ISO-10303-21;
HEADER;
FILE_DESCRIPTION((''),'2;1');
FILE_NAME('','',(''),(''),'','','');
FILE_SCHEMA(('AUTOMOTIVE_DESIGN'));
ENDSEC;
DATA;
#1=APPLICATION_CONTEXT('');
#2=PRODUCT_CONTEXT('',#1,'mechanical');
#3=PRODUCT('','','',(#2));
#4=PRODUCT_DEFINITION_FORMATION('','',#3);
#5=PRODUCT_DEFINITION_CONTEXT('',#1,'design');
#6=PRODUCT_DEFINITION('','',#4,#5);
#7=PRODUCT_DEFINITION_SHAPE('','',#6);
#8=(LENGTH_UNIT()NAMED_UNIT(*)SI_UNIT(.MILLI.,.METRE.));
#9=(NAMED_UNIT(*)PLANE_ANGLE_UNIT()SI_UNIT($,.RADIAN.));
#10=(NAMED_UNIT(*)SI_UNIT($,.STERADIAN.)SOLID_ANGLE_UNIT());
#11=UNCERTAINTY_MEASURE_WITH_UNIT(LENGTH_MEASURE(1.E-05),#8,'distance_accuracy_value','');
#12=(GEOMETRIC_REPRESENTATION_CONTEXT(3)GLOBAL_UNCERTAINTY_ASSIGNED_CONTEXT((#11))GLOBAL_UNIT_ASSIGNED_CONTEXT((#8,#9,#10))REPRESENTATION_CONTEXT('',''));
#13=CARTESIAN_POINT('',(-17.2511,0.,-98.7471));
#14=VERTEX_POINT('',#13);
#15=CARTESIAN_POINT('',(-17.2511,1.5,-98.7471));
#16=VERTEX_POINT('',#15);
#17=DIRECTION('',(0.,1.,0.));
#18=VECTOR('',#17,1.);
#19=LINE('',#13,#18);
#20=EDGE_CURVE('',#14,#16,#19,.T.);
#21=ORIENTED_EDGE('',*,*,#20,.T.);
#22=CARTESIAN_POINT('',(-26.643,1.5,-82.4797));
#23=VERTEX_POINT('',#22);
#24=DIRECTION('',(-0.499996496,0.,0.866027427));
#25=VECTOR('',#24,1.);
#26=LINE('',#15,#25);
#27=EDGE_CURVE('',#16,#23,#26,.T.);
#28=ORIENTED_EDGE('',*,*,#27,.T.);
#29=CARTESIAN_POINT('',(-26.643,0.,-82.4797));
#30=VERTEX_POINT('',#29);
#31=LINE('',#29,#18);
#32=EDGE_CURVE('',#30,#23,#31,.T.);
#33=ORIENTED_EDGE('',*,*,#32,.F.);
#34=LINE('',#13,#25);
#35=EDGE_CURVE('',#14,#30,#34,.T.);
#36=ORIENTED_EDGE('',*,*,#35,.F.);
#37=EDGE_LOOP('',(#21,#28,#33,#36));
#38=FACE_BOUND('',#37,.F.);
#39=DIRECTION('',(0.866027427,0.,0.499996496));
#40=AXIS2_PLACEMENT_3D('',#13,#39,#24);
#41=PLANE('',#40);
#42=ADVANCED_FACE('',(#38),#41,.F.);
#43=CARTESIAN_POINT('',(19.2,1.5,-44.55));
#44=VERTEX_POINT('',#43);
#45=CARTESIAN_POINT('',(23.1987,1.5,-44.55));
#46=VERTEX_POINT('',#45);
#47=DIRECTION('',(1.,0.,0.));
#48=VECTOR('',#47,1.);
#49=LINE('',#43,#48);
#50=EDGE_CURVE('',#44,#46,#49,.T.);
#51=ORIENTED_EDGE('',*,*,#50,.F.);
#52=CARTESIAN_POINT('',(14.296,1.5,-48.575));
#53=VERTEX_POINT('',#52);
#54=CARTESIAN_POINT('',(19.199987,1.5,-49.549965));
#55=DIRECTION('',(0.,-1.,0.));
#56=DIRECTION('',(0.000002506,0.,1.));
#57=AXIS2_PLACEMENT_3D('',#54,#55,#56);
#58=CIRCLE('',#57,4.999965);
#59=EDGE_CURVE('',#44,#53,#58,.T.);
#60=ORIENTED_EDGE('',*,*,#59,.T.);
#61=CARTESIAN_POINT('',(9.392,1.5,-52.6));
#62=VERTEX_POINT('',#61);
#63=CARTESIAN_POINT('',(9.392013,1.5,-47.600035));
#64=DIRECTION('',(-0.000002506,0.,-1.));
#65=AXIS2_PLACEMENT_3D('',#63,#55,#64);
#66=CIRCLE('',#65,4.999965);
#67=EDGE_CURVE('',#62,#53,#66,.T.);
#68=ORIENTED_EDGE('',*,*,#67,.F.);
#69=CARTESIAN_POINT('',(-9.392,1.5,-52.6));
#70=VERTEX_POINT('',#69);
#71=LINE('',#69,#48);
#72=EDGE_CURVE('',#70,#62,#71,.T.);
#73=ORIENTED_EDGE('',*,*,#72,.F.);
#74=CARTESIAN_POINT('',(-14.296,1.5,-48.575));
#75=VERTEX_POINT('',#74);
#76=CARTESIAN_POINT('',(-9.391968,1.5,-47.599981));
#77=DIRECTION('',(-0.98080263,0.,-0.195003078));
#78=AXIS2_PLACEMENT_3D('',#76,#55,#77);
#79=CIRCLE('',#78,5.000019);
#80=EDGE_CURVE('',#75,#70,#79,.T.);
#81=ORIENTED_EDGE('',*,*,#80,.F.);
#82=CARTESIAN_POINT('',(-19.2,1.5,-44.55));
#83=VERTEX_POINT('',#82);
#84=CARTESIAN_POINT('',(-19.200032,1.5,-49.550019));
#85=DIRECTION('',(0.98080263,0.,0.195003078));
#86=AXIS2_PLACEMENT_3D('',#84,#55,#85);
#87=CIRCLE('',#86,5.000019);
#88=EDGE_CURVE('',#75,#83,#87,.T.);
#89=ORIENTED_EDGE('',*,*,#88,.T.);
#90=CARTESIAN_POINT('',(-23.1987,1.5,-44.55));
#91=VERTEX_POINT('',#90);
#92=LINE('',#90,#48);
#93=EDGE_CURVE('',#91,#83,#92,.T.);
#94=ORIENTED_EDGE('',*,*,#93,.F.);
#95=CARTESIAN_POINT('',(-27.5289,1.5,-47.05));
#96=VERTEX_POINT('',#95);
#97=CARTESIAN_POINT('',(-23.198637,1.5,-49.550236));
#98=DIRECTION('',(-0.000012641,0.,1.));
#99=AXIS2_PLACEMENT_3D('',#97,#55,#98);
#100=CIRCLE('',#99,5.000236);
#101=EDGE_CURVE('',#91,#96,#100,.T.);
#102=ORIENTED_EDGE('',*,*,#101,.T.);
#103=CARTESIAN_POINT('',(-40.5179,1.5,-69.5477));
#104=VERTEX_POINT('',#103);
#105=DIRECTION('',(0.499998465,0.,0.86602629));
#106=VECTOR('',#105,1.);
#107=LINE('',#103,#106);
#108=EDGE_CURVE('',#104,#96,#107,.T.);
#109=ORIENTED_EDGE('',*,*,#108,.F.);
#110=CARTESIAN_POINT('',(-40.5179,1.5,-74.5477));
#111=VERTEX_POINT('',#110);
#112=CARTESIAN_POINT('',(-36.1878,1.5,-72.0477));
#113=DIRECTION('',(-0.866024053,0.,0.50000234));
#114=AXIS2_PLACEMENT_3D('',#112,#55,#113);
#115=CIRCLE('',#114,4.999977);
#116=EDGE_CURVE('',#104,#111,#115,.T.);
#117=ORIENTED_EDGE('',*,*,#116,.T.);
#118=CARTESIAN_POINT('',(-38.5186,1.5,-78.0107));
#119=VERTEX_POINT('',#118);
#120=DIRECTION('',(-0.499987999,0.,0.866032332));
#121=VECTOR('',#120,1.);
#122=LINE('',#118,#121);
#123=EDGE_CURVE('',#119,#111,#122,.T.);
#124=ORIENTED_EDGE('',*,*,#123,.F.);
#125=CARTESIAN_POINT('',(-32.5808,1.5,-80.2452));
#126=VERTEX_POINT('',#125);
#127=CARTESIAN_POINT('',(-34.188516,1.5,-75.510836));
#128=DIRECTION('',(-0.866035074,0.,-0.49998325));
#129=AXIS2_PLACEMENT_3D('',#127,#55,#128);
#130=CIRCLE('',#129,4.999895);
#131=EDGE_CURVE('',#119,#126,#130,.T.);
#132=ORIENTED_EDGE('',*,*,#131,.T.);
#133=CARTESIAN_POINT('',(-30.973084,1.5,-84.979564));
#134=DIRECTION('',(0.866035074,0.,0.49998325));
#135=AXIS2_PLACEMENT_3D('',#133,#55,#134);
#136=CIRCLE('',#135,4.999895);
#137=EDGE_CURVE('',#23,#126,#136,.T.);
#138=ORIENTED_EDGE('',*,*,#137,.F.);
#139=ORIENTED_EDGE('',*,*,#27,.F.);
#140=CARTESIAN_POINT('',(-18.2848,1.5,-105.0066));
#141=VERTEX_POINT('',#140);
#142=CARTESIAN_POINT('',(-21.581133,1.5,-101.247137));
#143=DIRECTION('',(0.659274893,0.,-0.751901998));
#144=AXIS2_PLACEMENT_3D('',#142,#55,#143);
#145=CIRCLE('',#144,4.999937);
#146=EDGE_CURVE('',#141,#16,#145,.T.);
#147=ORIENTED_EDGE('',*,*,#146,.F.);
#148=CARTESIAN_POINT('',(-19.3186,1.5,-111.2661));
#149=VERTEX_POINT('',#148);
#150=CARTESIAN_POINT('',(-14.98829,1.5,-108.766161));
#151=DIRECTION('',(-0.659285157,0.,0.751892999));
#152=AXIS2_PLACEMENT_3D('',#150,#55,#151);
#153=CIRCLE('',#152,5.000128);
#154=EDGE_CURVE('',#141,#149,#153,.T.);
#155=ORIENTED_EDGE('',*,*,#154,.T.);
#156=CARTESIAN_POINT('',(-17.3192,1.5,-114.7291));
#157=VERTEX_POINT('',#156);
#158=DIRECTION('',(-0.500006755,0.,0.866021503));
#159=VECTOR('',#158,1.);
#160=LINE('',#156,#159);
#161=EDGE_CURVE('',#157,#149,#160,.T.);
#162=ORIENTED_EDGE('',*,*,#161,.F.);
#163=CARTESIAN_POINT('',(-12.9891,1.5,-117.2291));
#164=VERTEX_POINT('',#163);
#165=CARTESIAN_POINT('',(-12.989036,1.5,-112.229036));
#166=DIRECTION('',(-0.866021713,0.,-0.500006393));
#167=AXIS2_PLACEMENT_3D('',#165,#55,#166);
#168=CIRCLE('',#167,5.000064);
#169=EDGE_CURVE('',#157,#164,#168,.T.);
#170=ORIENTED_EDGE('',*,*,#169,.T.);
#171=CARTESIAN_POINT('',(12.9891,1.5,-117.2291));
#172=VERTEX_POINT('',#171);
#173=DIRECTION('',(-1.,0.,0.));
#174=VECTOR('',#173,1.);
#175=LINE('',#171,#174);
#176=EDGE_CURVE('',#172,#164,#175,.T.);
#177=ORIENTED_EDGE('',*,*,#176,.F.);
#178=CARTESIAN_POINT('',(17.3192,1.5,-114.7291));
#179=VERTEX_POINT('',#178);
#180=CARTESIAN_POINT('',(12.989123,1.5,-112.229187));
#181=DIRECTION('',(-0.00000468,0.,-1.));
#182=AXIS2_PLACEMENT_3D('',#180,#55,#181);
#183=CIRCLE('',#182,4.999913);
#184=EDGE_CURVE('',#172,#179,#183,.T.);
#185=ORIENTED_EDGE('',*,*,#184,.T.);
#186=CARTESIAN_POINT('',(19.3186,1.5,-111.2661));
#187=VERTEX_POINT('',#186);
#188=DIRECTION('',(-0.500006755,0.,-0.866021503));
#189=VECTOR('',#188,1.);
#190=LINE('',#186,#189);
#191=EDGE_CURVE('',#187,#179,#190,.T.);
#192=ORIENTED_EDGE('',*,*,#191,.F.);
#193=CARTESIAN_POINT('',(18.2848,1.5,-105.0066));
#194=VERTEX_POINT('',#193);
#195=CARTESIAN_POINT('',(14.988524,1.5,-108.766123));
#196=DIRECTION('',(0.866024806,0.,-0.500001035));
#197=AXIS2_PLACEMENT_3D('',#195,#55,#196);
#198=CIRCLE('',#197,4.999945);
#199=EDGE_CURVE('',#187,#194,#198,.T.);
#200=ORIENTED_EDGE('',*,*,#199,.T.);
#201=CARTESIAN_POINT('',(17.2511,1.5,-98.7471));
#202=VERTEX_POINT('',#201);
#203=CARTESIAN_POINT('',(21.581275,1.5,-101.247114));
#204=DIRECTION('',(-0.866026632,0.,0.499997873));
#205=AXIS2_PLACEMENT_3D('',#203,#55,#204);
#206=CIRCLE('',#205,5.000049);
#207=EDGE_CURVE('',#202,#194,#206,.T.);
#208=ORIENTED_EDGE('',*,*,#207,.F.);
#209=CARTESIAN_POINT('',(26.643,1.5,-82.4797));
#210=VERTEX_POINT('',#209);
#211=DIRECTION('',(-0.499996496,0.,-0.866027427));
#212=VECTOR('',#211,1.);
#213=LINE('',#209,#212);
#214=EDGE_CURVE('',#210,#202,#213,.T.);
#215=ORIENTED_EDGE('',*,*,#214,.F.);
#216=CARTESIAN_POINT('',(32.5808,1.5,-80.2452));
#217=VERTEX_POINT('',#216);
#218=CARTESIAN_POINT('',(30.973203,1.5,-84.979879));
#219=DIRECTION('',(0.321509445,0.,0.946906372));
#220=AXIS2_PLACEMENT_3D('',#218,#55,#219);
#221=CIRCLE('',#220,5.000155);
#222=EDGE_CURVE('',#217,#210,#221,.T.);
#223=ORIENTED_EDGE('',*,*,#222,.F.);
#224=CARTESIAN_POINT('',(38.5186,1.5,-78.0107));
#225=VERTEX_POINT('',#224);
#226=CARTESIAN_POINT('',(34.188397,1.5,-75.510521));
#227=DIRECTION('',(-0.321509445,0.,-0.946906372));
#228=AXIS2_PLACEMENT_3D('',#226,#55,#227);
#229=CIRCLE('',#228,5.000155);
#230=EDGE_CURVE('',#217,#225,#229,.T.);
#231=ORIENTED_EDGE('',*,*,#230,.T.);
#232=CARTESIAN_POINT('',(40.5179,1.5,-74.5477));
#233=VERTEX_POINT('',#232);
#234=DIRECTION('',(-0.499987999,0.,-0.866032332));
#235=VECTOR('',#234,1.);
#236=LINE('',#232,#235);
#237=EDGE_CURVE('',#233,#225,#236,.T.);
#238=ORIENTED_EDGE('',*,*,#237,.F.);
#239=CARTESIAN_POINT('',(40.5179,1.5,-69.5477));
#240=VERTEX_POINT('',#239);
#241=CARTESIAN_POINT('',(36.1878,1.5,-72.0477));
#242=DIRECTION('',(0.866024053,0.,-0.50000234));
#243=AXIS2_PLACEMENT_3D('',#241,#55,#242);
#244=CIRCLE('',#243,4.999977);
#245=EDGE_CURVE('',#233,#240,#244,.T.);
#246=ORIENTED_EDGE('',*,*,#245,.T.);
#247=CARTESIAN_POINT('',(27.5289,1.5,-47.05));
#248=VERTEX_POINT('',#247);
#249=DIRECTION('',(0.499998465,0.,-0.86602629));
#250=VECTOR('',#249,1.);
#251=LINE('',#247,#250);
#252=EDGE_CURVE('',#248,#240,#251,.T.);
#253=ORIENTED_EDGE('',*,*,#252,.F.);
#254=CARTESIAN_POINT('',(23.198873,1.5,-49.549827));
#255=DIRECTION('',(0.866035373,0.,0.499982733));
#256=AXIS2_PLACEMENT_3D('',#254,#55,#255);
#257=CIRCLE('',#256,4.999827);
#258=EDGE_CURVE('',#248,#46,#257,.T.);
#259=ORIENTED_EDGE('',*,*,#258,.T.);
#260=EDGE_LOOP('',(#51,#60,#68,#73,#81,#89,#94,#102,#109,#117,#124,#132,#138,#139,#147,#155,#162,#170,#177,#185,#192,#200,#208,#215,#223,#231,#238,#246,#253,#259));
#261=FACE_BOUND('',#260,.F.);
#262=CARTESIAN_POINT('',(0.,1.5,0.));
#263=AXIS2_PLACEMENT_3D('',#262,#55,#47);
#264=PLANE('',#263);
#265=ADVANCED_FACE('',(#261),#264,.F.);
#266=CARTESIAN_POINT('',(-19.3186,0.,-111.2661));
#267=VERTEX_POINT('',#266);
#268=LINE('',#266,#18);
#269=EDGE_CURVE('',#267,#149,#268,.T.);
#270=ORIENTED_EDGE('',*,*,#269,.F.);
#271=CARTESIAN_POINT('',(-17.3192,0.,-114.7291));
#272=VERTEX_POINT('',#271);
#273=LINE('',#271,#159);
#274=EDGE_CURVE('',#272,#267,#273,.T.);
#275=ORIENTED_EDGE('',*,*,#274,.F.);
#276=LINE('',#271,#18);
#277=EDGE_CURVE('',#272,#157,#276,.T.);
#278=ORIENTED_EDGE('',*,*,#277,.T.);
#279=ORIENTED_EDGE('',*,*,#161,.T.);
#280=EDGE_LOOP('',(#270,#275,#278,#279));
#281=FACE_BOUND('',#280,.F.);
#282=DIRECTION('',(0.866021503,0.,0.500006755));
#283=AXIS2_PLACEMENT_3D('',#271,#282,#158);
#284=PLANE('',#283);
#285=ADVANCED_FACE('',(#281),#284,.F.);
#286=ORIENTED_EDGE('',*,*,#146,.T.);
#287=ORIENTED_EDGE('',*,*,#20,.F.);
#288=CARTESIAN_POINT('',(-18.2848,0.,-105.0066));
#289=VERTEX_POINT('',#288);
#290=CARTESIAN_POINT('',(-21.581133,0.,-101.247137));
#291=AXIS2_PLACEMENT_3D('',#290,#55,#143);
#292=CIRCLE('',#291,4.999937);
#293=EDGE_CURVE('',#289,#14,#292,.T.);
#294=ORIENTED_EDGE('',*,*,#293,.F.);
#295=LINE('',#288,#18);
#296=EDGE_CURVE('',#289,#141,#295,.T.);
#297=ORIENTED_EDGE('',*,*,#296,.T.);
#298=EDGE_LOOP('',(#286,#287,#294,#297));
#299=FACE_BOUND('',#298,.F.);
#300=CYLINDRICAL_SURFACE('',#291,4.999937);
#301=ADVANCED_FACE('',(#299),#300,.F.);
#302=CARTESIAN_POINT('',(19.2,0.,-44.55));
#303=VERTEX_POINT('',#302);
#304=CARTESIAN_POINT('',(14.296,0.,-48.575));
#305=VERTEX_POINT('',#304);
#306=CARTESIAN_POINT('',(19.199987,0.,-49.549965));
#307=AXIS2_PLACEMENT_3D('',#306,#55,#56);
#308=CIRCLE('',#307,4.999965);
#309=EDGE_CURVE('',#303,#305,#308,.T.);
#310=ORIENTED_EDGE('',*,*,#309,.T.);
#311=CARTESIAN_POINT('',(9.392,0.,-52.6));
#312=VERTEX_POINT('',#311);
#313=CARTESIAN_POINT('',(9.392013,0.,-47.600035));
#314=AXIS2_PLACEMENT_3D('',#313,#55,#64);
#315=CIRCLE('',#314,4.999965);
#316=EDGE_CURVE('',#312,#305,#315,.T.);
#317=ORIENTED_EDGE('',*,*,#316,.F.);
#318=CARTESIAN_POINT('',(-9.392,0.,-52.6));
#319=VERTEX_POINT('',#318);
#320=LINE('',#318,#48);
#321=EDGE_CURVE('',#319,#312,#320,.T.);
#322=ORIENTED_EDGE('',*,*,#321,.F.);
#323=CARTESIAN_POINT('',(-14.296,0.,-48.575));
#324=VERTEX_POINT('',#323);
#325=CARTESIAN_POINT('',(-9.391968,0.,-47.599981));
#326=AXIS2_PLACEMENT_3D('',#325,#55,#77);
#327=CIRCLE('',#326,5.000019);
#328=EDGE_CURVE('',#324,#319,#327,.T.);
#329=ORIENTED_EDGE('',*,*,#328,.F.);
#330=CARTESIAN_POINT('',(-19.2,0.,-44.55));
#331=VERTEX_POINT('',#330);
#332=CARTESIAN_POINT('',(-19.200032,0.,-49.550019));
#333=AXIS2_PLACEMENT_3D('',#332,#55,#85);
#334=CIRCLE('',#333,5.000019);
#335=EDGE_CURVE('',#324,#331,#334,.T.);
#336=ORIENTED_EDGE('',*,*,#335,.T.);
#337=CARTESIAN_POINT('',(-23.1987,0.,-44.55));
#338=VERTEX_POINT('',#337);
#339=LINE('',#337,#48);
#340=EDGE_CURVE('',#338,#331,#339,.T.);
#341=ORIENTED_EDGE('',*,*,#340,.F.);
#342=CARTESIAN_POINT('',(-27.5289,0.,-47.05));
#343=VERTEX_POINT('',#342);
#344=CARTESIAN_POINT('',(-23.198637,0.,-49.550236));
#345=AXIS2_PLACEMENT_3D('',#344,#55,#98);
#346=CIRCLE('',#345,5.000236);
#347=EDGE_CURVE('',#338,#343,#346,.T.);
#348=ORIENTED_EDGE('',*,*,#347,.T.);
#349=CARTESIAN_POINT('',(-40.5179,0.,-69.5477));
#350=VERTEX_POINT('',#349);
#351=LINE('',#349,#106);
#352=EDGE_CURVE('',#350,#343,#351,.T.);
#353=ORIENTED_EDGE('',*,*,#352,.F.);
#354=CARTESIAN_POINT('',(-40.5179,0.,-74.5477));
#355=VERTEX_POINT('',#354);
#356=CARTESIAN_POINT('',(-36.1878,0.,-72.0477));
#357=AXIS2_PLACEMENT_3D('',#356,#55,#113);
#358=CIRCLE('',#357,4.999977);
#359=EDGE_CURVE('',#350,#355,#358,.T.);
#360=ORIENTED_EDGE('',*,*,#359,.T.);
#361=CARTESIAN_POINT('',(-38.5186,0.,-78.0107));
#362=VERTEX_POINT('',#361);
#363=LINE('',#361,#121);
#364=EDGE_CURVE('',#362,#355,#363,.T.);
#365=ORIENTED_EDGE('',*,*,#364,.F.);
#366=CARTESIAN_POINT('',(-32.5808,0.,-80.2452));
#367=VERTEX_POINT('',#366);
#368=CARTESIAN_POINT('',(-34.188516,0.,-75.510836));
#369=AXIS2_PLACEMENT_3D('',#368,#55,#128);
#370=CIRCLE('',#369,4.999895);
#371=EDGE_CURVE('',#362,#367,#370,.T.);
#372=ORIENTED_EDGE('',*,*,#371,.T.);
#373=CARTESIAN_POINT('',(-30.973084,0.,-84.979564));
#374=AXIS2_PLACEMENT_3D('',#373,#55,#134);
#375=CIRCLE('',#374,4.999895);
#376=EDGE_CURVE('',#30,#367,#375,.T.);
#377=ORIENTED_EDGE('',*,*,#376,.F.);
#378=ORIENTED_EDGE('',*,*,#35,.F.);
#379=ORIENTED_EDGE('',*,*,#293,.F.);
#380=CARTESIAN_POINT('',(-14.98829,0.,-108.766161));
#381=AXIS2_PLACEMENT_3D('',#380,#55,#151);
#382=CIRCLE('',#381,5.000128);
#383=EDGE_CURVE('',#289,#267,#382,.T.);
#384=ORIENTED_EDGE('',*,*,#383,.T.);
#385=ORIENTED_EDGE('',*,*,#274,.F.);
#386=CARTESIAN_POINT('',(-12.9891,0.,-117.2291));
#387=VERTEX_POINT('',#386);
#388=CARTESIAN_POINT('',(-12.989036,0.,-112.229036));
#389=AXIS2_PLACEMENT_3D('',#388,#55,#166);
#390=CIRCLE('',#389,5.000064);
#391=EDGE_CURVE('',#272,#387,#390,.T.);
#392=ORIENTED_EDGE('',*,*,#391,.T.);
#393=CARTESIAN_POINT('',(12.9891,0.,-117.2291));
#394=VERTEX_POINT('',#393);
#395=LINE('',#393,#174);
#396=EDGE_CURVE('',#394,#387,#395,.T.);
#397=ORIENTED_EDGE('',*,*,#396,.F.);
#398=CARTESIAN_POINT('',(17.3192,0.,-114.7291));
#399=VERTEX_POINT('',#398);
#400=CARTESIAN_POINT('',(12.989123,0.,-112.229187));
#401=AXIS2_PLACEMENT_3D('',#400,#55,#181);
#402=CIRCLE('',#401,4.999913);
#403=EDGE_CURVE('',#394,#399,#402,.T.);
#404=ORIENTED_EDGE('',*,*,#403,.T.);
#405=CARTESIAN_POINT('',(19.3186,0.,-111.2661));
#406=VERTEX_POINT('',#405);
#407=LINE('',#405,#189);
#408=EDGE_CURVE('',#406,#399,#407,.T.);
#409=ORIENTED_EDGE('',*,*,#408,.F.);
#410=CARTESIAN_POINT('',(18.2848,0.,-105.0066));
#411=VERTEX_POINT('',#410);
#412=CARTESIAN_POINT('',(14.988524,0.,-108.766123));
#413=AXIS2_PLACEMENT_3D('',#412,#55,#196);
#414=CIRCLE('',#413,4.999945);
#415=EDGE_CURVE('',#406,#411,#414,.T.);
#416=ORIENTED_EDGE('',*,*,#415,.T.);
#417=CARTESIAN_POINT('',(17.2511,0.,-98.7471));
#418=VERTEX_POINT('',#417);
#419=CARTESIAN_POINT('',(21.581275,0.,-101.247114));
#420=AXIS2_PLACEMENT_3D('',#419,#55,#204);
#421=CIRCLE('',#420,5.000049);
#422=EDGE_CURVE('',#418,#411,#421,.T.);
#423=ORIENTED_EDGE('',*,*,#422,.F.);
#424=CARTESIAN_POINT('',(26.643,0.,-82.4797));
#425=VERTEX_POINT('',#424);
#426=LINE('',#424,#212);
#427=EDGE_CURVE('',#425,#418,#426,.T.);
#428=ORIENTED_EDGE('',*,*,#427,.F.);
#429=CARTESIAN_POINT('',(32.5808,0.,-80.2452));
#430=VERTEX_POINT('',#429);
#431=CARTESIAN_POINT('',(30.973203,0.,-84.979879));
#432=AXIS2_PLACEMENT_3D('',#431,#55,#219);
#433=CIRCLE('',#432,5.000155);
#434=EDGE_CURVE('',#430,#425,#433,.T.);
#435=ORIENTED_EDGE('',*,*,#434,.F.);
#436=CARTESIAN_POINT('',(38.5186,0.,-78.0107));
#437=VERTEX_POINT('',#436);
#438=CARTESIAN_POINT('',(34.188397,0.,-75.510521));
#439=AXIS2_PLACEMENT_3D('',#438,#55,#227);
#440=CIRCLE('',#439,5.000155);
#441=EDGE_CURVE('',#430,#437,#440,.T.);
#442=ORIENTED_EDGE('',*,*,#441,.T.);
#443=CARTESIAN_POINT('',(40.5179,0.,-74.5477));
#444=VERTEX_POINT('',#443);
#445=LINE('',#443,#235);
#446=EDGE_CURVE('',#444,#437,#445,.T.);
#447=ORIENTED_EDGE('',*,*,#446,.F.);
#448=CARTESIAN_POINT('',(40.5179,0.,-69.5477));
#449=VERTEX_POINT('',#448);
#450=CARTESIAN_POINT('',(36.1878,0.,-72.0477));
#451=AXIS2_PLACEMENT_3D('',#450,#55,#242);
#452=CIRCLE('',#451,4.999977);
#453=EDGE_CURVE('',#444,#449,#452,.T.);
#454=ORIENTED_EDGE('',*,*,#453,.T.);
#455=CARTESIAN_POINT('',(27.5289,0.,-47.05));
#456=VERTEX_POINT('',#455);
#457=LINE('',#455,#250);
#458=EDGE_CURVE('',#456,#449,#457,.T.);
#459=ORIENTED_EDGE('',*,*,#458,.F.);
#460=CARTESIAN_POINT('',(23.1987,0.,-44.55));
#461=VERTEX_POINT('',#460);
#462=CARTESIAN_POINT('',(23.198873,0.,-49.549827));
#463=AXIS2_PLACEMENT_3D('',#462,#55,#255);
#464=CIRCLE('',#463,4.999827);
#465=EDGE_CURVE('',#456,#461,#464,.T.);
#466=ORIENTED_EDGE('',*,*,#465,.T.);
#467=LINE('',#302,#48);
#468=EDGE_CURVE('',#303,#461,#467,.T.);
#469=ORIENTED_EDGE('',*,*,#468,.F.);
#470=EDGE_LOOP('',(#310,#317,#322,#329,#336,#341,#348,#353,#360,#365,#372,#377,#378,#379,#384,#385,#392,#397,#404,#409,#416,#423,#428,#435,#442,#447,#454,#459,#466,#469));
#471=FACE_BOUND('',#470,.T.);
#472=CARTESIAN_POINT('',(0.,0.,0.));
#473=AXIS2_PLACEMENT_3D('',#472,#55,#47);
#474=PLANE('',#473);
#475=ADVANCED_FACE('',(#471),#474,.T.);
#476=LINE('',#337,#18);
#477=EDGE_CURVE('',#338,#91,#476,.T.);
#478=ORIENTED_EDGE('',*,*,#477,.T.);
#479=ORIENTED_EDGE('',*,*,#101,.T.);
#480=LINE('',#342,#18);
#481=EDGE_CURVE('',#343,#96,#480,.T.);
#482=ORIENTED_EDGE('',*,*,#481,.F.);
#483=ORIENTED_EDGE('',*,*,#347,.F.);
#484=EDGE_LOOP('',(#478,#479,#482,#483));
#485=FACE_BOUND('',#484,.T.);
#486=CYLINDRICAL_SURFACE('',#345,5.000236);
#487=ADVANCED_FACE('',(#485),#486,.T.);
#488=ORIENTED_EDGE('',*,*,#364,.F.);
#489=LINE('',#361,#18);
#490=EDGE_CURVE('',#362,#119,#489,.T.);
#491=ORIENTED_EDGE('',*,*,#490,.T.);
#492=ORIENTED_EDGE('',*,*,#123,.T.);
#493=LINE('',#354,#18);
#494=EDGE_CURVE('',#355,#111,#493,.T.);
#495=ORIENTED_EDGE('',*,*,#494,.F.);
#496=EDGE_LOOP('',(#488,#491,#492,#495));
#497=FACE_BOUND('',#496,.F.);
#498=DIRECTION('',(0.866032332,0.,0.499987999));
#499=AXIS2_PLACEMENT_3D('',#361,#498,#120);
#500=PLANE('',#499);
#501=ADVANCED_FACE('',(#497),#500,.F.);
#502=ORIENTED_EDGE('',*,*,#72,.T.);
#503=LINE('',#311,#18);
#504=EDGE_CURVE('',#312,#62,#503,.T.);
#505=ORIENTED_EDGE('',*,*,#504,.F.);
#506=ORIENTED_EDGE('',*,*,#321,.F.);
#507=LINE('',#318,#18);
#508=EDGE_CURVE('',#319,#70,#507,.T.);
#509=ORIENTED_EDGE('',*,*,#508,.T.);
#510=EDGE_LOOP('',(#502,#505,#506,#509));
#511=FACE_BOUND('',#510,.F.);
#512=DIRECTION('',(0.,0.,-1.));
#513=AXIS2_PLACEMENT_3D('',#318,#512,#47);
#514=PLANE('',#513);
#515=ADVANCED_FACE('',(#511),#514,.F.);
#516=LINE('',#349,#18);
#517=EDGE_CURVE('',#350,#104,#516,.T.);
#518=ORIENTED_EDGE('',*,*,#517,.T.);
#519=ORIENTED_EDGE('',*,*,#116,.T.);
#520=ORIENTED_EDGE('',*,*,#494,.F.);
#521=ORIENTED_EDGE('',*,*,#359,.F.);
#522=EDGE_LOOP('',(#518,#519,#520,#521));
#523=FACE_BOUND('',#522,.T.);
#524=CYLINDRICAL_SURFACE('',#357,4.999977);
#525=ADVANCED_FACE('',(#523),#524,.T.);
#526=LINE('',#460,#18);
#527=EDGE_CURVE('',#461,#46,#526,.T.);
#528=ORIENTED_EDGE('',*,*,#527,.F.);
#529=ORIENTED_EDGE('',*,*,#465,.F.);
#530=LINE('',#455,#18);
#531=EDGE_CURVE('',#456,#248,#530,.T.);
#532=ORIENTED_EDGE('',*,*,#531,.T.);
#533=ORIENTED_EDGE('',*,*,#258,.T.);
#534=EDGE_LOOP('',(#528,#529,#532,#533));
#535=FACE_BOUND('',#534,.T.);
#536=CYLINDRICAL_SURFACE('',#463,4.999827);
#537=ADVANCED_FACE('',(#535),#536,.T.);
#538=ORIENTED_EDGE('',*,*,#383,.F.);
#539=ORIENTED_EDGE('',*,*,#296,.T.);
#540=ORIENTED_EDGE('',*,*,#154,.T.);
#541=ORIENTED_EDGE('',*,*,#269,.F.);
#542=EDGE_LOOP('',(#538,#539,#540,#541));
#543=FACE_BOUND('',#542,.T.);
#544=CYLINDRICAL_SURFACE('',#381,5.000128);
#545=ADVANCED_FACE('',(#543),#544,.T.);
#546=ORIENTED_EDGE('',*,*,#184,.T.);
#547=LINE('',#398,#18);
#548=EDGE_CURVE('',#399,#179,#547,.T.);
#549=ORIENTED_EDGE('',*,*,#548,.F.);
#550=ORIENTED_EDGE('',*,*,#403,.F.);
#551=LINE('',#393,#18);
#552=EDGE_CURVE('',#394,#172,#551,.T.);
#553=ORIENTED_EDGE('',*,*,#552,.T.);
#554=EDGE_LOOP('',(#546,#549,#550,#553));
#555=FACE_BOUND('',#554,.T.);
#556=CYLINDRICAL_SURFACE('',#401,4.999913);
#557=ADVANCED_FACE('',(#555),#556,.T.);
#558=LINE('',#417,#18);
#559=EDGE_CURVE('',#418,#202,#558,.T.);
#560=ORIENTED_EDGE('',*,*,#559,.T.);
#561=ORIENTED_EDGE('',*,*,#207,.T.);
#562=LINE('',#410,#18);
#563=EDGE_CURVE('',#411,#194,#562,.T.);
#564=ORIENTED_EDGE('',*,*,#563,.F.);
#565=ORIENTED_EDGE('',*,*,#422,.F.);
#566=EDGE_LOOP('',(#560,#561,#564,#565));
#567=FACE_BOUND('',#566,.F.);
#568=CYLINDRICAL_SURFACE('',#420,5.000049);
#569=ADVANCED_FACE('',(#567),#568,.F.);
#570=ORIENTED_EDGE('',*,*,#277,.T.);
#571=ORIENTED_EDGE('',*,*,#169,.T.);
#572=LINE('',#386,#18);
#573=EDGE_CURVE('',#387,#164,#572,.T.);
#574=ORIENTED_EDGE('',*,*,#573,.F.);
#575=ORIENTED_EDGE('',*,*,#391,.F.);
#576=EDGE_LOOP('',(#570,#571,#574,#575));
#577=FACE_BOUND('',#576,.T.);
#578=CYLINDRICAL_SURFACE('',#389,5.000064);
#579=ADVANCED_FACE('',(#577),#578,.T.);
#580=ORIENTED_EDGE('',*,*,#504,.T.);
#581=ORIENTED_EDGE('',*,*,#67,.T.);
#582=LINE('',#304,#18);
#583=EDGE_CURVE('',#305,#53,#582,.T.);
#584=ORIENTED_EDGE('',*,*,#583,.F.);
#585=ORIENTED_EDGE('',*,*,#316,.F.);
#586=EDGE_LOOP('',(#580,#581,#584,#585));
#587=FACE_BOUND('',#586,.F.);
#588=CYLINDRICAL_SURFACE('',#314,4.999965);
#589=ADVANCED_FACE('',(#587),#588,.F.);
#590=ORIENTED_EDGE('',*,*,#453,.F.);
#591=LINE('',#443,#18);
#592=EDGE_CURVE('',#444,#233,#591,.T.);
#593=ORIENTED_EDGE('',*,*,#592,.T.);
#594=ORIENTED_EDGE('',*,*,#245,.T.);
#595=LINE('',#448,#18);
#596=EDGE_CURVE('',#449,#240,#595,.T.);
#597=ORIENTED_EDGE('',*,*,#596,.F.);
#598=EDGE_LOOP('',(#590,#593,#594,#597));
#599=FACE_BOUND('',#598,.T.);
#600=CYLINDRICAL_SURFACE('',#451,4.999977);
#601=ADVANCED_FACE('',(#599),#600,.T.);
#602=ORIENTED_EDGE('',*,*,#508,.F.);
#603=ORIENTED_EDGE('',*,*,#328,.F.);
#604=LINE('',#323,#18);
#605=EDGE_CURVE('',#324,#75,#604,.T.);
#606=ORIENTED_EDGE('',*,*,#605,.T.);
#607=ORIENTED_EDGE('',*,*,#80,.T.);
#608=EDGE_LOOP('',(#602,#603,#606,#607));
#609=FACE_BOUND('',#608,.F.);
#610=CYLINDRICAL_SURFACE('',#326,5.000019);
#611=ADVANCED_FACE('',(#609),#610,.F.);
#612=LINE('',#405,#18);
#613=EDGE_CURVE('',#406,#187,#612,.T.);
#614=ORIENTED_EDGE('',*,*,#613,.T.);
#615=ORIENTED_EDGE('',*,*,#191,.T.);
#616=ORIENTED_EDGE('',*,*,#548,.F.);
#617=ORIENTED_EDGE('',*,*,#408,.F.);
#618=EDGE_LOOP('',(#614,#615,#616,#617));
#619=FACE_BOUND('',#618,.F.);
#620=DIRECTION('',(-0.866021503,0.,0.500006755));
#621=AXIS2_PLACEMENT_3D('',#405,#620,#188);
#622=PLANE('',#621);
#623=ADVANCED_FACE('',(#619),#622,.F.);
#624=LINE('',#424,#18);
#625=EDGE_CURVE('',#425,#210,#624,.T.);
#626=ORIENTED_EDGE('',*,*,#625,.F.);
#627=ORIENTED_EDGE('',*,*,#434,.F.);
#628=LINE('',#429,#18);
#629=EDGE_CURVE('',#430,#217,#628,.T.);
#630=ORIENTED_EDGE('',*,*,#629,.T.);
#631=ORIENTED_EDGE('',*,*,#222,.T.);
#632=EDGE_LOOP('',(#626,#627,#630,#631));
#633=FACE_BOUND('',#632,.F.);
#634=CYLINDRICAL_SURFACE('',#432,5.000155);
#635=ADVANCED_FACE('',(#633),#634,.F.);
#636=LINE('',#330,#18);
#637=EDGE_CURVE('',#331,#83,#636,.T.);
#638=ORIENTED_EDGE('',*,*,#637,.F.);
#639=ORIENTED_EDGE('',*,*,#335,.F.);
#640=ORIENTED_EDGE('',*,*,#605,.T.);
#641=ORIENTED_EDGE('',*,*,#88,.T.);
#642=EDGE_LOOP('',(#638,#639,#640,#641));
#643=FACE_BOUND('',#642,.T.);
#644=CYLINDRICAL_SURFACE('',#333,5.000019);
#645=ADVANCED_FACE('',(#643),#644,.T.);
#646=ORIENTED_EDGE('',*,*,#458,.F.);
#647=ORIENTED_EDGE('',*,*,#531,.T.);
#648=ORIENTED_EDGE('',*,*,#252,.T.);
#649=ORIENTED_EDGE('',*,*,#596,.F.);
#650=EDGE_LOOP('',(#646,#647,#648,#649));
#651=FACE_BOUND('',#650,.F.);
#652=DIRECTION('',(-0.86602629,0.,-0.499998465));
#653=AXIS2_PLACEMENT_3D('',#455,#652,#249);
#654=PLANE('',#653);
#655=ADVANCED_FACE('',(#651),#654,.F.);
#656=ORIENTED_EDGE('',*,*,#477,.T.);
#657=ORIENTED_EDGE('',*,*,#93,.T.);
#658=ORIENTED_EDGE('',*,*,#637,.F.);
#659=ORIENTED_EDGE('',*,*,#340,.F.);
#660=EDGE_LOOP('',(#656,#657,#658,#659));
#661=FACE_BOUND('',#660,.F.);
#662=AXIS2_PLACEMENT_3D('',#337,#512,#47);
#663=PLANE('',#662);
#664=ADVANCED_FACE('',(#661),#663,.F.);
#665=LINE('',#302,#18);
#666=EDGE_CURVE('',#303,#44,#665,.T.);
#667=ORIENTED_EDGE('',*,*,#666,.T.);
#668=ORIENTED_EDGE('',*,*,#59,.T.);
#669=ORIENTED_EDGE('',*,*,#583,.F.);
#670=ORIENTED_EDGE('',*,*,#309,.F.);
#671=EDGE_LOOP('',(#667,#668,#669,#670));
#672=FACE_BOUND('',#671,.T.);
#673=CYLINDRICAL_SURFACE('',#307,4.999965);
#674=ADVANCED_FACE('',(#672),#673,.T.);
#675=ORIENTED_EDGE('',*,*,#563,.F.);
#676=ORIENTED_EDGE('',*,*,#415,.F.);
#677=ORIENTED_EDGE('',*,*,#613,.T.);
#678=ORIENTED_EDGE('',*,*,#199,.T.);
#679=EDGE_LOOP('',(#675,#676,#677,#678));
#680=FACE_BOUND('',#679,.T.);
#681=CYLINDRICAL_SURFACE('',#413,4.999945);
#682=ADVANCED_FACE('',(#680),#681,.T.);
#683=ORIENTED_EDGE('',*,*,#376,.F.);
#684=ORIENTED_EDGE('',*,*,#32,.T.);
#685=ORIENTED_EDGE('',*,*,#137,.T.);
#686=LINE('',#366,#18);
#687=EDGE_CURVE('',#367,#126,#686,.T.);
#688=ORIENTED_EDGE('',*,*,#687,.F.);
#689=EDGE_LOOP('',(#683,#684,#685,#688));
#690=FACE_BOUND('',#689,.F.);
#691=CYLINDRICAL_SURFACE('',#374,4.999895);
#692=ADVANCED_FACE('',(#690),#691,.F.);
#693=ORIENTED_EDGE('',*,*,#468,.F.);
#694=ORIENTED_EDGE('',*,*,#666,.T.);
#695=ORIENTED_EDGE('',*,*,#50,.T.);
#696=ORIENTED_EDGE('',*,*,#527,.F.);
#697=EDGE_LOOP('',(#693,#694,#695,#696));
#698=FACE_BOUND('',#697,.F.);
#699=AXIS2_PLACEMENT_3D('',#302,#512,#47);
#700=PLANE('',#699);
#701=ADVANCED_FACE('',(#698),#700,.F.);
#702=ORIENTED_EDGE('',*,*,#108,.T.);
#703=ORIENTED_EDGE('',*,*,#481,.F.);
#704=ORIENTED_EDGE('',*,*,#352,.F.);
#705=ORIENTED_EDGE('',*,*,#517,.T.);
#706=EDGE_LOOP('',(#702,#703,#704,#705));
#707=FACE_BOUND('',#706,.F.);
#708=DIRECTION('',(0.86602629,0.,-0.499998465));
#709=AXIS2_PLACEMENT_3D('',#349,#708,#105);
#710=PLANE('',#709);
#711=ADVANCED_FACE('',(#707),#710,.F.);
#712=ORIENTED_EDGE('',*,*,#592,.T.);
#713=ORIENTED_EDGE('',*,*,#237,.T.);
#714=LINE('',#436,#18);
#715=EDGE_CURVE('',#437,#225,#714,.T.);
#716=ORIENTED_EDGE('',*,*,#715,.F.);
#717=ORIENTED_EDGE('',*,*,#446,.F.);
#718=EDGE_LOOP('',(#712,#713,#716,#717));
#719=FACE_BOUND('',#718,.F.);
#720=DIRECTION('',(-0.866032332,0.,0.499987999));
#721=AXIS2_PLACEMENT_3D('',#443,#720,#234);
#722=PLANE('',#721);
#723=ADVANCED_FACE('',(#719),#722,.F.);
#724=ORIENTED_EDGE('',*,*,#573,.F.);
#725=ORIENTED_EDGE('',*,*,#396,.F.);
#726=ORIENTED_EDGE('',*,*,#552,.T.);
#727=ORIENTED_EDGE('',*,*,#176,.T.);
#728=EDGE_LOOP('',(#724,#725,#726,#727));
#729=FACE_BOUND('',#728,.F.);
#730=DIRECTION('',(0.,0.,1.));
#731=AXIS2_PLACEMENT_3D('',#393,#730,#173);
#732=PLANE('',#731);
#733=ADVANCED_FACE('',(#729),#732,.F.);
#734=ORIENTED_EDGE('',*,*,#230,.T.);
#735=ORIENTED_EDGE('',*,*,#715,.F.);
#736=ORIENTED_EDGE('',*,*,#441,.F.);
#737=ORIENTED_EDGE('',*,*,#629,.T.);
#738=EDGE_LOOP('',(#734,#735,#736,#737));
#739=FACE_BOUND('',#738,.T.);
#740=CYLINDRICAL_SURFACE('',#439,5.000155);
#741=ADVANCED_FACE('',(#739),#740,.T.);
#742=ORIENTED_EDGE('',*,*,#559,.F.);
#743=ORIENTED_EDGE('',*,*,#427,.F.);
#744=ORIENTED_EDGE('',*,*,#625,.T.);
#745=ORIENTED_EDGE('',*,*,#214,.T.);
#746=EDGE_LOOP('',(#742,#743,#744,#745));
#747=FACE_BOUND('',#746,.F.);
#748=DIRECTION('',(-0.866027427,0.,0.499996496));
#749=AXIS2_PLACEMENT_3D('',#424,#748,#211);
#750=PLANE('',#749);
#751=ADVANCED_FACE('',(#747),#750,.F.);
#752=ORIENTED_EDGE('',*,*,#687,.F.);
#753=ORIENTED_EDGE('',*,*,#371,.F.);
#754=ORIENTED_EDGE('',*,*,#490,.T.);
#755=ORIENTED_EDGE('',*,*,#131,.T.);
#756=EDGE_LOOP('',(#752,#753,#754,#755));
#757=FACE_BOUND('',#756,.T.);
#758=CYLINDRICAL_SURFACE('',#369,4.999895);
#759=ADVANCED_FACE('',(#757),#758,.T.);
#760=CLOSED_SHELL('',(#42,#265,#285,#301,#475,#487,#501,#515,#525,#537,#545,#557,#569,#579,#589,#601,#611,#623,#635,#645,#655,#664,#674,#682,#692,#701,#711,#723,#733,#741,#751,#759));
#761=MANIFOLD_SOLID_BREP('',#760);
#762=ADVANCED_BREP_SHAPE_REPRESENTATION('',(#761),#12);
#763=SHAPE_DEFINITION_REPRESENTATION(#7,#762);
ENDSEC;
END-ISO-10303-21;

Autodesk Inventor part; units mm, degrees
ref_plane "YZ Plane" through (0, 0, 0) normal (1, 0, 0) x (0, 1, 0)
ref_plane "XZ Plane" through (0, 0, 0) normal (0, 1, 0) x (-1, 0, 0)
ref_plane "XY Plane" through (0, 0, 0) normal (0, 0, 1) x (1, 0, 0)
sketch "スケッチ1" plane through (0, 0, 0) normal (0, 1, 0) x (-1, 0, 0)
  line L0 (75, 0) -> (105, -51.9615)
  line L1 (-75, 0) -> (-105, -51.9615)
  line L2 (0, -218.2384) -> (0, 36.3731)
  line L3 (147, 0) -> (-147, 0)
  line L4 (37.5, -27) -> (-37.5, -27)
  line L5 (105, -51.9615) -> (30, -181.8653)
  line L6 (30, -181.8653) -> (-30, -181.8653)
  line L7 (-30, -181.8653) -> (-105, -51.9615)
  line L8 (75, 0) -> (-75, 0)
  line L9 (-25.3673, -135.8894) -> (-62.8673, -70.9375)
  line L10 (25.3673, -135.8894) -> (62.8673, -70.9375)
  line L11 (-37.5, -27) -> (-27.5, -27)
  line L12 (-27.5, -27) -> (-27.5, -39)
  line L13 (-27.5, -39) -> (-37.5, -39)
  line L14 (-37.5, -39) -> (-37.5, -27)
  line L15 (37.5, -27) -> (27.5, -27)
  line L16 (27.5, -27) -> (27.5, -39)
  line L17 (27.5, -39) -> (37.5, -39)
  line L18 (37.5, -39) -> (37.5, -27)
  line L19 (0, -77.9423) -> (44.1173, -103.4134) construction
  line L20 (0, -77.9423) -> (-44.1173, -103.4134) construction
  line L21 (-44.1173, -103.4134) -> (-67.5, -116.9134) construction
  line L22 (-57.8673, -79.5977) -> (-47.475, -73.5977)
  line L23 (-52.475, -64.9375) -> (-62.8673, -70.9375)
  line L24 (-62.8673, -70.9375) -> (-57.8673, -79.5977)
  line L25 (-47.475, -73.5977) -> (-52.475, -64.9375)
  line L26 (-25.3673, -135.8894) -> (-30.3673, -127.2291)
  line L27 (-19.975, -121.2291) -> (-14.975, -129.8894)
  line L28 (-14.975, -129.8894) -> (-25.3673, -135.8894)
  line L29 (-30.3673, -127.2291) -> (-19.975, -121.2291)
  line L30 (30.3673, -127.2291) -> (19.975, -121.2291)
  line L31 (14.975, -129.8894) -> (25.3673, -135.8894)
  line L32 (25.3673, -135.8894) -> (30.3673, -127.2291)
  line L33 (19.975, -121.2291) -> (14.975, -129.8894)
  line L34 (62.8673, -70.9375) -> (57.8673, -79.5977)
  line L35 (47.475, -73.5977) -> (52.475, -64.9375)
  line L36 (52.475, -64.9375) -> (62.8673, -70.9375)
  line L37 (57.8673, -79.5977) -> (47.475, -73.5977)
  line L38 (62.8673, -70.9375) -> (37.5, -27)
  line L39 (-37.5, -27) -> (-62.8673, -70.9375)
  line L40 (-25.3673, -135.8894) -> (25.3673, -135.8894)
  line L41 (-25.3673, -135.8894) -> (-25.3673, -181.8653)
  line L42 (25.3673, -135.8894) -> (25.3673, -181.8653)
  line L43 (-25.3673, -135.8894) -> (-48.75, -149.3894)
  line L44 (25.3673, -135.8894) -> (48.75, -149.3894)
  point P0 (0, 0)
  point P1 (0, 0)
  point P2 (0, -27)
  dimension "d1" = 150
  dimension "d2" = 60
  dimension "d3" = 60
  dimension "d4" = 27
  dimension "d5" = 75
  dimension "d6" = 60
  dimension "d7" = 27
  dimension "d8" = 10
  dimension "d9" = 12
  dimension "d10" = 10
  dimension "d11" = 12
  dimension "d14" = 360
extrude "プレート1" add sketch "スケッチ1" along normal blind 1.5 contours L5 L6 L42 L44 | L4 L16 L17 L18 L38 L36 L35 L37 L10 L30 L33 L31 L40 L2 | L2 L40 L28 L27 L29 L9 L22 L25 L23 L39 L14 L13 L12 L4 | L31 L33 L30 L10 | L42 L6 L2 L40 | L2 L6 L41 L40 | L4 L18 L17 L16 | L12 L13 L14 L4 | L9 L29 L27 L28 | L41 L6 L7 L43 | L37 L35 L36 L10 | L23 L25 L22 L9
sketch "スケッチ2" plane through (0, 0, 0) normal (0, -1, 0) x (1, 0, 0)
  line L0 (23.3798, -38.55) -> (-23.3798, -38.55) projected
  line L1 (8.2, -46.6) -> (-8.2, -46.6) projected
  arc A0 (-21.1, -27) -> (-23.3798, -38.55) centre (-21.1, -33) ccw projected
  line L2 (-27.5, -27) -> (-27.5, -39) projected
  line L3 (27.5, -39) -> (27.5, -27) projected
  line L4 (-27.5, -39) -> (-27.5, -40.55)
  line L5 (-27.5, -40.55) -> (-10.2, -40.55)
  line L6 (-10.2, -40.55) -> (-10.2, -48.6)
  line L7 (-10.2, -48.6) -> (10.2, -48.6)
  line L8 (10.2, -48.6) -> (10.2, -40.55)
  line L9 (10.2, -40.55) -> (27.5, -40.55)
  line L10 (27.5, -40.55) -> (27.5, -39)
  line L11 (-37.5, -27) -> (-27.5, -27) projected
  line L12 (-37.5, -27) -> (37.5, -27) projected
  line L13 (-20.3112, -101.4469) -> (-30.5112, -83.78)
  line L14 (-27.2827, -105.4719) -> (-20.3112, -101.4469)
  line L15 (-18.6327, -120.4541) -> (-27.2827, -105.4719)
  line L16 (-19.975, -121.2291) -> (-18.6327, -120.4541)
  line L17 (-37.4827, -87.805) -> (-46.1327, -72.8227)
  line L18 (-46.1327, -72.8227) -> (-47.475, -73.5977)
  line L19 (-30.5112, -83.78) -> (-37.4827, -87.805)
  line L20 (30.5112, -83.78) -> (20.3112, -101.4469)
  line L21 (37.4827, -87.805) -> (30.5112, -83.78)
  line L22 (46.1327, -72.8227) -> (37.4827, -87.805)
  line L23 (47.475, -73.5977) -> (46.1327, -72.8227)
  line L24 (27.2827, -105.4719) -> (18.6327, -120.4541)
  line L25 (18.6327, -120.4541) -> (19.975, -121.2291)
  line L26 (20.3112, -101.4469) -> (27.2827, -105.4719)
  line L27 (-47.475, -73.5977) -> (-57.8673, -79.5977)
  line L28 (-57.8673, -79.5977) -> (-30.3673, -127.2291)
  line L29 (-30.3673, -127.2291) -> (-19.975, -121.2291)
  line L30 (19.975, -121.2291) -> (30.3673, -127.2291)
  line L31 (30.3673, -127.2291) -> (57.8673, -79.5977)
  line L32 (57.8673, -79.5977) -> (47.475, -73.5977)
  point P0 (0, 0)
  point P1 (0, -77.9423)
  point P2 (-23.0432, -100.7148)
  point P3 (-33.5673, -121.6866)
  point P4 (-22.4248, -117.8859)
  point P5 (-25.3673, -135.8894)
  point P6 (-28.3712, -118.6866)
  point P7 (-31.2432, -86.512)
  point P8 (-45.8046, -77.3909)
  point P9 (-62.8673, -70.9375)
  point P10 (31.2432, -86.512)
  point P11 (54.6673, -85.1403)
  point P12 (45.8046, -77.3909)
  point P13 (62.8673, -70.9375)
  point P14 (49.4712, -82.1403)
  point P15 (23.0432, -100.7148)
  point P16 (22.4248, -117.8859)
  point P17 (25.3673, -135.8894)
  dimension "d17" = 2
  dimension "d18" = 2
  dimension "d19" = 2
  dimension "d20" = 2
  dimension "d26" = 360
extrude "切り取り1" cut sketch "スケッチ2" against normal blind 1.5
fillet "フィレット1" radius 1.5 18 edges at (-10.2, 0.75, -48.6) (-10.2, 0.75, -40.55) (-27.5, 0.75, -40.55) (10.2, 0.75, -48.6) (10.2, 0.75, -40.55) (27.5, 0.75, -40.55) (-30.5112, 0.75, -83.78) (-46.1327, 0.75, -72.8227) (-20.3112, 0.75, -101.4469) (-27.2827, 0.75, -105.4719) (-37.4827, 0.75, -87.805) (-18.6327, 0.75, -120.4541) (20.3112, 0.75, -101.4469) (27.2827, 0.75, -105.4719) (18.6327, 0.75, -120.4541) (30.5112, 0.75, -83.78) (37.4827, 0.75, -87.805) (46.1327, 0.75, -72.8227)
sketch "スケッチ3" plane through (0, 0, 0) normal (0, -1, 0) x (1, 0, 0)
  circle A0 centre (40.9875, -45.0405) radius 1.6 projected
  circle A1 centre (48.9875, -58.8969) radius 1.6 projected
  circle A2 centre (8, -129.8894) radius 1.6 projected
  circle A3 centre (-8, -129.8894) radius 1.6 projected
  circle A4 centre (-48.9875, -58.8969) radius 1.6 projected
  circle A5 centre (-40.9875, -45.0405) radius 1.6 projected
  point P0 (0, 0)
extrude "切り取り2" cut sketch "スケッチ3" against normal blind 1.5
sketch "スケッチ4" plane through (0, 0, 0) normal (0, -1, 0) x (1, 0, 0)
  circle A0 centre (10, -176.8653) radius 1.35 projected
  circle A1 centre (21.2333, -145.0496) radius 1.6 projected
  circle A2 centre (10, -143.8894) radius 1.6 projected
  line L0 (52.75, -142.4612) -> (30, -181.8653) projected
  line L1 (52.75, -142.4612) -> (33.6974, -131.4612) projected
  line L2 (33.6974, -131.4612) -> (27.1974, -142.7195) projected
  line L3 (27.1974, -142.7195) -> (20.5635, -138.8894) projected
  line L4 (20.5635, -138.8894) -> (5, -138.8894) projected
  line L5 (5, -138.8894) -> (5, -181.8653) projected
  line L6 (30, -181.8653) -> (5, -181.8653) projected
  circle A3 centre (-10, -176.8653) radius 1.35 projected
  circle A4 centre (-21.2333, -145.0496) radius 1.6 projected
  circle A5 centre (-10, -143.8894) radius 1.6 projected
  line L7 (-12.9295, -171.4323) -> (-35.4295, -132.4612) projected
  line L8 (-30.25, -181.4323) -> (-12.9295, -171.4323) projected
  line L9 (-30, -181.8653) -> (-30.25, -181.4323) projected
  line L10 (-30, -181.8653) -> (-5, -181.8653) projected
  line L11 (-5, -181.8653) -> (-5, -138.8894) projected
  line L12 (-5, -138.8894) -> (-20.5635, -138.8894) projected
  line L13 (-20.5635, -138.8894) -> (-27.1974, -142.7195) projected
  line L14 (-33.6974, -131.4612) -> (-27.1974, -142.7195) projected
  line L15 (-35.4295, -132.4612) -> (-33.6974, -131.4612) projected
  point P0 (0, 0)
extrude "切り取り3" cut sketch "スケッチ4" against normal blind 1.5 contours A0 | A1 | A2 | A3 | A4 | A5
sketch "スケッチ5" plane through (0, 1.5, 0) normal (0, 1, 0) x (1, 0, 0)
  line L0 (-19.975, 121.2291) -> (19.975, 121.2291) projected
  line L1 (47.475, 73.5977) -> (27.5, 39) projected
  line L2 (-47.475, 73.5977) -> (-27.5, 39) projected
  point P0 (0, 0)
sketch "スケッチ6" plane through (0, 1.5, 0) normal (0, 1, 0) x (1, 0, 0)
  line L0 (-26.0855, 44.55) -> (-41.9613, 72.0477)
  line L1 (-41.9613, 72.0477) -> (-36.0186, 82.3409)
  line L2 (-36.0186, 82.3409) -> (-29.0471, 78.3159)
  line L3 (-29.0471, 78.3159) -> (-14.8471, 102.911)
  line L4 (-14.8471, 102.911) -> (-21.8186, 106.936)
  line L5 (-21.8186, 106.936) -> (-15.8758, 117.2291)
  line L6 (-15.8758, 117.2291) -> (15.8758, 117.2291)
  line L7 (15.8758, 117.2291) -> (21.8186, 106.936)
  line L8 (21.8186, 106.936) -> (14.8471, 102.911)
  line L9 (14.8471, 102.911) -> (29.0471, 78.3159)
  line L10 (29.0471, 78.3159) -> (36.0186, 82.3409)
  line L11 (36.0186, 82.3409) -> (41.9613, 72.0477)
  line L12 (41.9613, 72.0477) -> (26.0855, 44.55)
  line L13 (26.0855, 44.55) -> (14.2, 44.55)
  line L14 (14.2, 44.55) -> (14.2, 52.6)
  line L15 (14.2, 52.6) -> (-14.2, 52.6)
  line L16 (-14.2, 52.6) -> (-14.2, 44.55)
  line L17 (-14.2, 44.55) -> (-26.0855, 44.55)
  line L18 (-47.475, 73.5977) -> (-27.5, 39) projected
  line L19 (-38.2327, 86.5059) -> (-45.3827, 74.1218) projected
  line L20 (-31.8102, 84.53) -> (-36.1836, 87.055) projected
  line L21 (-21.0612, 100.1479) -> (-29.7612, 85.079) projected
  line L22 (-25.9836, 104.7219) -> (-21.6102, 102.1969) projected
  line L23 (-19.3827, 119.1551) -> (-26.5327, 106.7709) projected
  line L24 (-19.975, 121.2291) -> (19.975, 121.2291) projected
  line L25 (47.475, 73.5977) -> (27.5, 39) projected
  line L26 (26.5327, 106.7709) -> (19.3827, 119.1551) projected
  line L27 (21.6102, 102.1969) -> (25.9836, 104.7219) projected
  line L28 (29.7612, 85.079) -> (21.0612, 100.1479) projected
  line L29 (36.1836, 87.055) -> (31.8102, 84.53) projected
  line L30 (45.3827, 74.1218) -> (38.2327, 86.5059) projected
  line L31 (11.7, 40.55) -> (26, 40.55) projected
  line L32 (10.2, 47.1) -> (10.2, 42.05) projected
  line L33 (-8.7, 48.6) -> (8.7, 48.6) projected
  line L34 (-10.2, 42.05) -> (-10.2, 47.1) projected
  line L35 (-26, 40.55) -> (-11.7, 40.55) projected
  line L36 (0, 48.6) -> (0, 121.2291)
  line L37 (-25.4112, 92.6134) -> (-31.0836, 95.8884) construction
  point P0 (0, 0)
  dimension "d32" = 4
  dimension "d33" = 4
  dimension "d34" = 4
  dimension "d35" = 4
  dimension "d36" = 4
  dimension "d37" = 4
  dimension "d38" = 4
  dimension "d39" = 4
  dimension "d40" = 4
extrude "切り取り4" cut sketch "スケッチ6" against normal blind 1.5
fillet "フィレット2" radius 5 9 edges at (-14.2, 0.75, -44.55) (-26.0855, 0.75, -44.55) (-41.9613, 0.75, -72.0477) (-36.0186, 0.75, -82.3409) (-21.8186, 0.75, -106.936) (-15.8758, 0.75, -117.2291) (-14.2, 0.75, -52.6) (-29.0471, 0.75, -78.3159) (-14.8471, 0.75, -102.911)
mirror "ミラー1" about plane through (0, 0, 0) normal (1, 0, 0) of "フィレット2"
sketch "スケッチ7" plane through (0, 0, 0) normal (0, -1, 0) x (1, 0, 0)
  arc A0 (17.2511, -98.7471) -> (18.2848, -105.0066) centre (21.5812, -101.2471) ccw projected
  arc A1 (19.3186, -111.2661) -> (18.2848, -105.0066) centre (14.9884, -108.7661) ccw projected
  line L0 (19.3186, -111.2661) -> (17.3192, -114.7291) projected
  arc A2 (12.9891, -117.2291) -> (17.3192, -114.7291) centre (12.9891, -112.2291) ccw projected
  line L1 (12.9891, -117.2291) -> (-12.9891, -117.2291) projected
  arc A3 (-17.3192, -114.7291) -> (-12.9891, -117.2291) centre (-12.9891, -112.2291) ccw projected
  line L2 (-17.3192, -114.7291) -> (-19.3186, -111.2661) projected
  arc A4 (-18.2848, -105.0066) -> (-19.3186, -111.2661) centre (-14.9884, -108.7661) ccw projected
  arc A5 (-18.2848, -105.0066) -> (-17.2511, -98.7471) centre (-21.5812, -101.2471) ccw projected
  line L3 (-17.2511, -98.7471) -> (-26.643, -82.4797) projected
  arc A6 (-26.643, -82.4797) -> (-32.5808, -80.2452) centre (-30.9732, -84.9797) ccw projected
  arc A7 (-38.5186, -78.0107) -> (-32.5808, -80.2452) centre (-34.1884, -75.5107) ccw projected
  line L4 (-38.5186, -78.0107) -> (-40.5179, -74.5477) projected
  arc A8 (-40.5179, -69.5477) -> (-40.5179, -74.5477) centre (-36.1878, -72.0477) ccw projected
  line L5 (-40.5179, -69.5477) -> (-27.5289, -47.05) projected
  arc A9 (-23.1987, -44.55) -> (-27.5289, -47.05) centre (-23.1987, -49.55) ccw projected
  line L6 (-23.1987, -44.55) -> (-19.2, -44.55) projected
  arc A10 (-14.296, -48.575) -> (-19.2, -44.55) centre (-19.2, -49.55) ccw projected
  arc A11 (-14.296, -48.575) -> (-9.392, -52.6) centre (-9.392, -47.6) ccw projected
  line L7 (-9.392, -52.6) -> (9.392, -52.6) projected
  arc A12 (9.392, -52.6) -> (14.296, -48.575) centre (9.392, -47.6) ccw projected
  arc A13 (19.2, -44.55) -> (14.296, -48.575) centre (19.2, -49.55) ccw projected
  line L8 (19.2, -44.55) -> (23.1987, -44.55) projected
  arc A14 (27.5289, -47.05) -> (23.1987, -44.55) centre (23.1987, -49.55) ccw projected
  line L9 (27.5289, -47.05) -> (40.5179, -69.5477) projected
  arc A15 (40.5179, -74.5477) -> (40.5179, -69.5477) centre (36.1878, -72.0477) ccw projected
  line L10 (40.5179, -74.5477) -> (38.5186, -78.0107) projected
  arc A16 (32.5808, -80.2452) -> (38.5186, -78.0107) centre (34.1884, -75.5107) ccw projected
  arc A17 (32.5808, -80.2452) -> (26.643, -82.4797) centre (30.9732, -84.9797) ccw projected
  line L11 (26.643, -82.4797) -> (17.2511, -98.7471) projected
  circle A18 centre (21.2333, -145.0496) radius 1.6 projected
  circle A19 centre (-10, -143.8894) radius 1.6 projected
  circle A20 centre (-10, -176.8653) radius 1.35 projected
  circle A21 centre (-21.2333, -145.0496) radius 1.6 projected
  circle A22 centre (10, -176.8653) radius 1.35 projected
  circle A23 centre (10, -143.8894) radius 1.6 projected
  circle A24 centre (-48.9875, -58.8969) radius 1.6 projected
  circle A25 centre (8, -129.8894) radius 1.6 projected
  circle A26 centre (40.9875, -45.0405) radius 1.6 projected
  circle A27 centre (48.9875, -58.8969) radius 1.6 projected
  circle A28 centre (-8, -129.8894) radius 1.6 projected
  circle A29 centre (-40.9875, -45.0405) radius 1.6 projected
  arc A30 (36.1836, -87.055) -> (38.2327, -86.5059) centre (36.9336, -85.7559) ccw projected
  line L12 (38.2327, -86.5059) -> (45.3827, -74.1218) projected
  arc A31 (47.4317, -73.5727) -> (45.3827, -74.1218) centre (46.6817, -74.8718) ccw projected
  line L13 (47.4317, -73.5727) -> (57.8673, -79.5977) projected
  line L14 (62.8673, -70.9375) -> (57.8673, -79.5977) projected
  line L15 (37.5, -27) -> (62.8673, -70.9375) projected
  line L16 (27.5, -27) -> (37.5, -27) projected
  line L17 (27.5, -27) -> (27.5, -39.05) projected
  arc A32 (26, -40.55) -> (27.5, -39.05) centre (26, -39.05) ccw projected
  line L18 (26, -40.55) -> (11.7, -40.55) projected
  arc A33 (11.7, -40.55) -> (10.2, -42.05) centre (11.7, -42.05) ccw projected
  line L19 (10.2, -42.05) -> (10.2, -47.1) projected
  arc A34 (8.7, -48.6) -> (10.2, -47.1) centre (8.7, -47.1) ccw projected
  line L20 (8.7, -48.6) -> (-8.7, -48.6) projected
  arc A35 (-10.2, -47.1) -> (-8.7, -48.6) centre (-8.7, -47.1) ccw projected
  line L21 (-10.2, -47.1) -> (-10.2, -42.05) projected
  arc A36 (-10.2, -42.05) -> (-11.7, -40.55) centre (-11.7, -42.05) ccw projected
  line L22 (-11.7, -40.55) -> (-26, -40.55) projected
  arc A37 (-27.5, -39.05) -> (-26, -40.55) centre (-26, -39.05) ccw projected
  line L23 (-27.5, -39.05) -> (-27.5, -27) projected
  line L24 (-37.5, -27) -> (-27.5, -27) projected
  line L25 (-62.8673, -70.9375) -> (-37.5, -27) projected
  line L26 (-57.8673, -79.5977) -> (-62.8673, -70.9375) projected
  line L27 (-57.8673, -79.5977) -> (-47.4317, -73.5727) projected
  arc A38 (-45.3827, -74.1218) -> (-47.4317, -73.5727) centre (-46.6817, -74.8718) ccw projected
  line L28 (-45.3827, -74.1218) -> (-38.2327, -86.5059) projected
  arc A39 (-38.2327, -86.5059) -> (-36.1836, -87.055) centre (-36.9336, -85.7559) ccw projected
  line L29 (-36.1836, -87.055) -> (-31.8102, -84.53) projected
  arc A40 (-29.7612, -85.079) -> (-31.8102, -84.53) centre (-31.0602, -85.829) ccw projected
  line L30 (-29.7612, -85.079) -> (-21.0612, -100.1479) projected
  arc A41 (-21.6102, -102.1969) -> (-21.0612, -100.1479) centre (-22.3602, -100.8979) ccw projected
  line L31 (-21.6102, -102.1969) -> (-25.9836, -104.7219) projected
  arc A42 (-25.9836, -104.7219) -> (-26.5327, -106.7709) centre (-25.2336, -106.0209) ccw projected
  line L32 (-26.5327, -106.7709) -> (-19.3827, -119.1551) projected
  arc A43 (-19.9317, -121.2041) -> (-19.3827, -119.1551) centre (-20.6817, -119.9051) ccw projected
  line L33 (-19.9317, -121.2041) -> (-30.3673, -127.2291) projected
  line L34 (-25.3673, -135.8894) -> (-30.3673, -127.2291) projected
  line L35 (-48.75, -149.3894) -> (-25.3673, -135.8894) projected
  line L36 (-30, -181.8653) -> (-48.75, -149.3894) projected
  line L37 (30, -181.8653) -> (-30, -181.8653) projected
  line L38 (48.75, -149.3894) -> (30, -181.8653) projected
  line L39 (25.3673, -135.8894) -> (48.75, -149.3894) projected
  line L40 (30.3673, -127.2291) -> (25.3673, -135.8894) projected
  line L41 (30.3673, -127.2291) -> (19.9317, -121.2041) projected
  arc A44 (19.3827, -119.1551) -> (19.9317, -121.2041) centre (20.6817, -119.9051) ccw projected
  line L42 (19.3827, -119.1551) -> (26.5327, -106.7709) projected
  arc A45 (26.5327, -106.7709) -> (25.9836, -104.7219) centre (25.2336, -106.0209) ccw projected
  line L43 (25.9836, -104.7219) -> (21.6102, -102.1969) projected
  arc A46 (21.0612, -100.1479) -> (21.6102, -102.1969) centre (22.3602, -100.8979) ccw projected
  line L44 (21.0612, -100.1479) -> (29.7612, -85.079) projected
  arc A47 (31.8102, -84.53) -> (29.7612, -85.079) centre (31.0602, -85.829) ccw projected
  line L45 (31.8102, -84.53) -> (36.1836, -87.055) projected
  point P0 (0, 0)
extrude "押し出し1" cut sketch "スケッチ7" against normal through all
extrude "押し出し2" add sketch "スケッチ7" against normal blind 1.5 contours A0 A1 L0 A2 L1 A3 L2 A4 A5 L3 A6 A7 L4 A8 L5 A9 L6 A10 A11 L7 A12 A13 L8 A14 L9 A15 L10 A16 A17 L11
equation "\"d3\" = d2"
equation "\"d7\" = d4"
equation "\"d19\" = d18"
equation "\"d21\" = Thickness"
equation "\"d28\" = Thickness"
equation "\"d30\" = Thickness"
equation "\"d33\" = d32"
equation "\"d34\" = d32"
equation "\"d35\" = d32"
equation "\"d36\" = d32"
equation "\"d37\" = d32"
equation "\"d38\" = d32"
equation "\"d39\" = d32"
equation "\"d40\" = d32"
equation "\"d41\" = Thickness"
equation "\"d16\" = Thickness"
equation "\"BendRadius\" = Thickness"
equation "\"BendReliefWidth\" = Thickness"
equation "\"BendReliefDepth\" = 0.5 * Thickness"
equation "\"CornerReliefSize\" = 4 * Thickness"
equation "\"MinimumRemnant\" = 2 * Thickness"
equation "\"TransitionRadius\" = BendRadius"
equation "\"JacobiRadiusSize\" = BendRadius"
equation "\"GapSize\" = Thickness"
equation "\"Thickness\" = 1.5"
properties part number "ORCA_CORE_setter"
